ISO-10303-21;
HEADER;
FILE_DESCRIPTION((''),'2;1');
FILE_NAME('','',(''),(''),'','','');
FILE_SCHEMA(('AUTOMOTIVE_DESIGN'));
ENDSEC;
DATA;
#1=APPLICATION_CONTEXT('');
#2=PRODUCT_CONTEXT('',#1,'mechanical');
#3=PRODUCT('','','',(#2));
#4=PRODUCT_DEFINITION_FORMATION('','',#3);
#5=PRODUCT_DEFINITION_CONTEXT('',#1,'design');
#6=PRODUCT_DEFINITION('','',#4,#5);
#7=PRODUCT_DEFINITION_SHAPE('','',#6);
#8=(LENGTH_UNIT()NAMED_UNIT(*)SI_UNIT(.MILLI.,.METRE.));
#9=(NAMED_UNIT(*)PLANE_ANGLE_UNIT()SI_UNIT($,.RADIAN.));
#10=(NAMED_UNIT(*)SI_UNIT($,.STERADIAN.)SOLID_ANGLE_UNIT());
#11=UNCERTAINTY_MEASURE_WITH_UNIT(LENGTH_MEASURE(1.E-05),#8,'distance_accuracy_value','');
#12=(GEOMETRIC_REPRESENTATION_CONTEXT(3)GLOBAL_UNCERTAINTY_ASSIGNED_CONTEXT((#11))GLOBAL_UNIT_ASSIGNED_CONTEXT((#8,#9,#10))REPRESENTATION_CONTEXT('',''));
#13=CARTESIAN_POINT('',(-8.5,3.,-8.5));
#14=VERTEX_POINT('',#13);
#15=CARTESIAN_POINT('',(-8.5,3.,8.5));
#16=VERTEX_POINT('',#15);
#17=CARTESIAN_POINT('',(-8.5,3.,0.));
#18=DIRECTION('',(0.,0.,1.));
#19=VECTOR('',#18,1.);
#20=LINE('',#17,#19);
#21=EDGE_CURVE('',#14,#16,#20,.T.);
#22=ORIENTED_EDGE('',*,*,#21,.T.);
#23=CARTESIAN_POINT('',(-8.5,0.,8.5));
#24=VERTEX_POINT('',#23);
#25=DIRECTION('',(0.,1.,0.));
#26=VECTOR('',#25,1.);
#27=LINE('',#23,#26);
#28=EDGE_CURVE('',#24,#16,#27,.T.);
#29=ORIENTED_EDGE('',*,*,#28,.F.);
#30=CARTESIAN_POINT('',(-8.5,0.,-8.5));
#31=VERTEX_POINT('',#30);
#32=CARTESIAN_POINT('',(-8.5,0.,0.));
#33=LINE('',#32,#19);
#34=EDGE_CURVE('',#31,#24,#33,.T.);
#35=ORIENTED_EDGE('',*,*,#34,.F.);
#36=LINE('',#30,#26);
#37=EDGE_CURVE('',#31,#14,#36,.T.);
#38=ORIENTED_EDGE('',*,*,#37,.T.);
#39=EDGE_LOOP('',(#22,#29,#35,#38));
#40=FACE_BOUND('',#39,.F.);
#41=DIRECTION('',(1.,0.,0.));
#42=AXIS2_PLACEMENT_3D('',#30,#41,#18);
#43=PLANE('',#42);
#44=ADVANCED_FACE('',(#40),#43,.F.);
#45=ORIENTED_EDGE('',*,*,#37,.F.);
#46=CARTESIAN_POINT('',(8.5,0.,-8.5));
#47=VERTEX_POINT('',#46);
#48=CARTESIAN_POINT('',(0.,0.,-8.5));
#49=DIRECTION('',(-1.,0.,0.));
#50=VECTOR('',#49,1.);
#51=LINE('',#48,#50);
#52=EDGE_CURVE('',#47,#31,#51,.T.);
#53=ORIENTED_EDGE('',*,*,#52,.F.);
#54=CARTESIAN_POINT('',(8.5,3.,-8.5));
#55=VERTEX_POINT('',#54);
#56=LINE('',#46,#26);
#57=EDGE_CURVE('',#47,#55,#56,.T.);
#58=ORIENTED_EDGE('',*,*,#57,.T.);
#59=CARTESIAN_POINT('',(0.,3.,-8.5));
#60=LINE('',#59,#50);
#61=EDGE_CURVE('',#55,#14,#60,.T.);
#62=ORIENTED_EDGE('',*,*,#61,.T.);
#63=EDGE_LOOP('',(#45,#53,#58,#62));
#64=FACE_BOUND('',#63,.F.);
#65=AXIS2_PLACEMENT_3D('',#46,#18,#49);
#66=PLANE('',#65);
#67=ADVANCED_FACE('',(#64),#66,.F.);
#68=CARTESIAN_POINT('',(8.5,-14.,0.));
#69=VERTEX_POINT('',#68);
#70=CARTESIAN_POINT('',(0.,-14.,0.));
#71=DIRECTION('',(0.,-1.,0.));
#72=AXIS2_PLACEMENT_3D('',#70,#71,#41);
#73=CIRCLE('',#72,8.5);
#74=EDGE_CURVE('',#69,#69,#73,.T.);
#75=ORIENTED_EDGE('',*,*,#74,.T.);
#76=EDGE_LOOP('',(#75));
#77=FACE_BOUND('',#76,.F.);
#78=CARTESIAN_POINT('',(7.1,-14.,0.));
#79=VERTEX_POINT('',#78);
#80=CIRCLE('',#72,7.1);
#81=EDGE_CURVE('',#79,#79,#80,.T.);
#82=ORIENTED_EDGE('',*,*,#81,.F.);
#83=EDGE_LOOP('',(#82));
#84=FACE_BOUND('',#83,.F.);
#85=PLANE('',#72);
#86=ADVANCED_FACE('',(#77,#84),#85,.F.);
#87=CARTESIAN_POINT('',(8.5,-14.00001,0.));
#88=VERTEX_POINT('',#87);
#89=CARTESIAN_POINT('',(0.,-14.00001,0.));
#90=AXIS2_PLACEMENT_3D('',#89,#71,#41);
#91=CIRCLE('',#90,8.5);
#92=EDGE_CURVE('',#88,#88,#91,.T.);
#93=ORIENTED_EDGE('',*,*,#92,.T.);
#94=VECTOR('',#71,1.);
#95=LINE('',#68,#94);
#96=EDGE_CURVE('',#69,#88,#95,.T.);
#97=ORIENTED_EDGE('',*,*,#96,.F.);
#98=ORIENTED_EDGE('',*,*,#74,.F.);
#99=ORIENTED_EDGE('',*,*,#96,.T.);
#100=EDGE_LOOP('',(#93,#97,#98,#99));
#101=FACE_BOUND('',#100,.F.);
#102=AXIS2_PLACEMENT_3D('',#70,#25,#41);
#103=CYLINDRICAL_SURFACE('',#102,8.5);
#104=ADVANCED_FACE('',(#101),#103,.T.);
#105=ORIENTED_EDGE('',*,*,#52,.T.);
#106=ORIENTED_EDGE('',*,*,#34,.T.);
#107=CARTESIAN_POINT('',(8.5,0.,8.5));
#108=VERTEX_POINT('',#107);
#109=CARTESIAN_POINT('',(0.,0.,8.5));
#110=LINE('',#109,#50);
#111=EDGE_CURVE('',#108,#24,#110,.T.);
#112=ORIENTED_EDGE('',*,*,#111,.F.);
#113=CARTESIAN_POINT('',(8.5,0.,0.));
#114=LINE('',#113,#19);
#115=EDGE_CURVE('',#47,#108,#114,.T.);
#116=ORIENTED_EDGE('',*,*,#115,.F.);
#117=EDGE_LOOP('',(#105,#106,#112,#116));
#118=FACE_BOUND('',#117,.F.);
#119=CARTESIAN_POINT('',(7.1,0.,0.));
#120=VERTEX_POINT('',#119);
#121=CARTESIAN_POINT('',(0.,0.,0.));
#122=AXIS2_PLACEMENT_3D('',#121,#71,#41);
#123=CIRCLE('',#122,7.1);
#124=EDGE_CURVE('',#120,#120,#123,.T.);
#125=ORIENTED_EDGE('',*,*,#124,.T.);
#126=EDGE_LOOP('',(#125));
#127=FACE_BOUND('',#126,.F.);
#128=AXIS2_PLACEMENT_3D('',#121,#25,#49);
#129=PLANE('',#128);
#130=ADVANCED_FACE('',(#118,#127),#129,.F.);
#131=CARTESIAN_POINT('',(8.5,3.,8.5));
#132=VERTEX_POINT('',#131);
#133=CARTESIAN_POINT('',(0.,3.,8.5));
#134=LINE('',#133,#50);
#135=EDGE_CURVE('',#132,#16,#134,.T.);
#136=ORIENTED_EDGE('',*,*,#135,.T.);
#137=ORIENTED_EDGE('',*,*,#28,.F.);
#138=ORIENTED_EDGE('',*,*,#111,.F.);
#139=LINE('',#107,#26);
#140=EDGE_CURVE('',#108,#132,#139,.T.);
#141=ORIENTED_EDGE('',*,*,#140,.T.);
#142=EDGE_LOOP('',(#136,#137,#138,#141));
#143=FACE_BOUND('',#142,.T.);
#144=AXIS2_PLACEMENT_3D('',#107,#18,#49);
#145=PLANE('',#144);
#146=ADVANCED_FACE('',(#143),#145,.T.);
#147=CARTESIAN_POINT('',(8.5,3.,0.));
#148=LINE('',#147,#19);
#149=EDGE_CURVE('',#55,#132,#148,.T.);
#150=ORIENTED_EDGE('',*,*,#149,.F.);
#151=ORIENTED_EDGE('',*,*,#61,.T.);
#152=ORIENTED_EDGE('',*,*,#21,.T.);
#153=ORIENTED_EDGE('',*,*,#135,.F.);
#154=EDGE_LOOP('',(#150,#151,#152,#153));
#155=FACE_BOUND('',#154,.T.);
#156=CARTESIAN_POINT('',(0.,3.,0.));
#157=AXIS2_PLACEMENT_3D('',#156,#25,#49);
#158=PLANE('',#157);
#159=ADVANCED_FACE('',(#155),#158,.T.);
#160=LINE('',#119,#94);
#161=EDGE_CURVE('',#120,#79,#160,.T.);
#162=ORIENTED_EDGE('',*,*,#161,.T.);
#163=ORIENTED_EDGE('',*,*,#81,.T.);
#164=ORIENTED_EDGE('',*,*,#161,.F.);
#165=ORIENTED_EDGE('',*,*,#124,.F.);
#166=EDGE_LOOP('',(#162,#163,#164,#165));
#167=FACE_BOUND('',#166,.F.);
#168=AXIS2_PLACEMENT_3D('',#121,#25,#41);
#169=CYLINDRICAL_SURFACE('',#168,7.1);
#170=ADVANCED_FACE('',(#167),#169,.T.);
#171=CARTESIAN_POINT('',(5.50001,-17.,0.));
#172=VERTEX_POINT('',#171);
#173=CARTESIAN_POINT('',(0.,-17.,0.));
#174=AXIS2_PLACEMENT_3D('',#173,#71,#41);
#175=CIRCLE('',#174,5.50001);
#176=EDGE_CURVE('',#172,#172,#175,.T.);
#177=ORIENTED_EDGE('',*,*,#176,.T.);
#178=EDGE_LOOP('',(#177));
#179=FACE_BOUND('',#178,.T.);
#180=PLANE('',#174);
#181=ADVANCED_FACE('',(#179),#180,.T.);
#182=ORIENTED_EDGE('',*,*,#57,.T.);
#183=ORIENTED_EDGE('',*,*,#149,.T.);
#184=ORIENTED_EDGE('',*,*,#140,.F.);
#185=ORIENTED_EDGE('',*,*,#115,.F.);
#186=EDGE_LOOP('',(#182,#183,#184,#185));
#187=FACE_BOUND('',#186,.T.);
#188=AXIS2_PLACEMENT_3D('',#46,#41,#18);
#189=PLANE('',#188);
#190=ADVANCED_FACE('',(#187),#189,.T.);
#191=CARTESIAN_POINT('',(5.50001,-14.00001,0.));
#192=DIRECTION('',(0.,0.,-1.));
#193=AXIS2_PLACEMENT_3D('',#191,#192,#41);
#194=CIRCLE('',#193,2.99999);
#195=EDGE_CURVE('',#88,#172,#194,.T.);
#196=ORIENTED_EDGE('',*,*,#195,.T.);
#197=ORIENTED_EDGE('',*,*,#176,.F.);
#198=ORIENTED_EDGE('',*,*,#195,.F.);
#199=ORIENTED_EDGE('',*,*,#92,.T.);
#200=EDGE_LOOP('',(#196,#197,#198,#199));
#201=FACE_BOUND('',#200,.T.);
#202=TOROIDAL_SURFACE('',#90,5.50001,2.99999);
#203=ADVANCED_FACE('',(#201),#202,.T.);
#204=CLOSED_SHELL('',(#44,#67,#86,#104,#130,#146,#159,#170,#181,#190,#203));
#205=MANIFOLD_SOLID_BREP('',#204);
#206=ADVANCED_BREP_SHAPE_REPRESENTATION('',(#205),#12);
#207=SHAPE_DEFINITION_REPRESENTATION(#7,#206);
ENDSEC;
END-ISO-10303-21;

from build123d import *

# Parameters (mm, degrees)
F0_R     = 7.1
F1_DEPTH = 14
F2_R     = 8.5
F2_R_2   = 7.1
F3_DEPTH = 3
F4_R     = 2.99999
F5_W     = 17
F5_H     = 17
F5_R     = 7.1
F6_DEPTH = 3


# Not quite as in the source:
# - a fillet or chamfer is up to 0.001 mm smaller than in the source, because OpenCascade refuses the exact size


with BuildPart() as f1:
    # F0 (on Front) → F1 (new body)
    with BuildSketch(Plane.XZ):
        Circle(F0_R)
    extrude(amount=F1_DEPTH)

    # F2 (on face) → F3 (join)
    with BuildSketch(Plane.XZ.offset(14)):
        Circle(F2_R)
        Circle(F2_R_2, mode=Mode.SUBTRACT)
        Circle(F2_R_2)
    extrude(amount=F3_DEPTH)

    # F4 (radius 3 in the source; OpenCascade refuses exactly that, so slightly less here)
    f4_edges = [f1.edges().sort_by_distance(p)[0] for p in [
        (-8.5, -17, 0),
    ]]
    fillet(f4_edges, radius=F4_R)

    # F5 (on face) → F6 (join)
    with BuildSketch(Plane(origin=(0, 0, 0), x_dir=(-1, 0, 0), z_dir=(0, 1, 0))):
        with Locations((2.794e-06, 0)):
            Rectangle(F5_W, F5_H)
        Circle(F5_R, mode=Mode.SUBTRACT)
        Circle(F5_R)
    extrude(amount=F6_DEPTH)


solid = f1.part
